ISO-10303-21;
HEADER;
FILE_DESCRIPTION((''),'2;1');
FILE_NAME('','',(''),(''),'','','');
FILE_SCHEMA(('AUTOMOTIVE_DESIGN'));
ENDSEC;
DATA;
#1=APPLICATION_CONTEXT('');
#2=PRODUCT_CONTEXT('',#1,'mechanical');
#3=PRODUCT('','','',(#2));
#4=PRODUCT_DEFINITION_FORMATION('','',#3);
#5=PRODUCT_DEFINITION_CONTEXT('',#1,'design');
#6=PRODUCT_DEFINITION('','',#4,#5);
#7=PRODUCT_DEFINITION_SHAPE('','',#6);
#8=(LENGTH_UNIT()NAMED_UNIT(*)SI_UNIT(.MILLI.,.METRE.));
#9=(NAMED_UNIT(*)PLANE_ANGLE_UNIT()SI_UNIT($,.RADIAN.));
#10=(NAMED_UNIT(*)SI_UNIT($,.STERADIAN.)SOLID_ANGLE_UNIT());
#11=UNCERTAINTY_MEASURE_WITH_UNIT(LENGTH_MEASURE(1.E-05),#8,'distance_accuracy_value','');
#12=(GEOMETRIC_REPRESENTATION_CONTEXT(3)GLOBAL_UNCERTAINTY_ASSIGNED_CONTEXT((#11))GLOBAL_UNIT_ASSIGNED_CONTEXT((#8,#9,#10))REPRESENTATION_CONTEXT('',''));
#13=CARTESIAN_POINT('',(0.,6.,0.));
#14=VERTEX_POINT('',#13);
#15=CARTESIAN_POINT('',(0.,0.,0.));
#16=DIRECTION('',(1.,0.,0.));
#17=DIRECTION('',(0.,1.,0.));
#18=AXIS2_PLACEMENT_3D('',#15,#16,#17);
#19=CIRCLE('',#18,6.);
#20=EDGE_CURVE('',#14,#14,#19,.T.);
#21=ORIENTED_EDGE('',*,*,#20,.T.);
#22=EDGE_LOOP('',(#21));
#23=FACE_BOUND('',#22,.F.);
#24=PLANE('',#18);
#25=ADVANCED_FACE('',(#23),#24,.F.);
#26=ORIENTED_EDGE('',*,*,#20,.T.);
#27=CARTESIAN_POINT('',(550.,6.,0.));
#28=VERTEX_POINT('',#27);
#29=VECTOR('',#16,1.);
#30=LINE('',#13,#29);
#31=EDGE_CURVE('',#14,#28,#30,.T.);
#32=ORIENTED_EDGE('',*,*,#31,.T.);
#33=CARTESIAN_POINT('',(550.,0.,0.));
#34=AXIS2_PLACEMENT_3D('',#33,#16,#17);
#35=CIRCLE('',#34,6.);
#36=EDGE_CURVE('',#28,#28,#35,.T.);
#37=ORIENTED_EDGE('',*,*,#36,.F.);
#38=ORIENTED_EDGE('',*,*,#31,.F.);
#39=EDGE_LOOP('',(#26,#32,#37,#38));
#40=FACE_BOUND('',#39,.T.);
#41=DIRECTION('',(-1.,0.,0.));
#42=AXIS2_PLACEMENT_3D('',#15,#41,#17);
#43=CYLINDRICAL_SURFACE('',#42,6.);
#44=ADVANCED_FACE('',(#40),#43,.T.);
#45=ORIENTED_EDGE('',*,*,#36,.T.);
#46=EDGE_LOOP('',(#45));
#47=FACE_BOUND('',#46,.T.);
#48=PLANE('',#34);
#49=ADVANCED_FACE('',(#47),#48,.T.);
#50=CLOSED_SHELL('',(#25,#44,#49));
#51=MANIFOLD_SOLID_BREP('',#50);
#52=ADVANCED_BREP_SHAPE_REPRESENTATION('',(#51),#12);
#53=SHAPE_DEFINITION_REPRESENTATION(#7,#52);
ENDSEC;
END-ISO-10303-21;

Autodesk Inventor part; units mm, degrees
ref_plane "YZ Plane" through (0, 0, 0) normal (1, 0, 0) x (0, 1, 0)
ref_plane "XZ Plane" through (0, 0, 0) normal (0, 1, 0) x (-1, 0, 0)
ref_plane "XY Plane" through (0, 0, 0) normal (0, 0, 1) x (1, 0, 0)
sketch "Sketch1" plane through (0, 0, 0) normal (1, 0, 0) x (0, 1, 0)
  circle A0 centre (0, 0) radius 6
  dimension "d0" = 12
extrude "Extrusion1" add sketch "Sketch1" along normal blind 550
thread "Thread1" size "M12x1.75" class "6g" standard "ANSI Metric M Profile" length 70
thread "Thread2" size "M12x1.75" class "6g" standard "ANSI Metric M Profile" length 70
properties part number "P002" material "Aluminum 6061"
